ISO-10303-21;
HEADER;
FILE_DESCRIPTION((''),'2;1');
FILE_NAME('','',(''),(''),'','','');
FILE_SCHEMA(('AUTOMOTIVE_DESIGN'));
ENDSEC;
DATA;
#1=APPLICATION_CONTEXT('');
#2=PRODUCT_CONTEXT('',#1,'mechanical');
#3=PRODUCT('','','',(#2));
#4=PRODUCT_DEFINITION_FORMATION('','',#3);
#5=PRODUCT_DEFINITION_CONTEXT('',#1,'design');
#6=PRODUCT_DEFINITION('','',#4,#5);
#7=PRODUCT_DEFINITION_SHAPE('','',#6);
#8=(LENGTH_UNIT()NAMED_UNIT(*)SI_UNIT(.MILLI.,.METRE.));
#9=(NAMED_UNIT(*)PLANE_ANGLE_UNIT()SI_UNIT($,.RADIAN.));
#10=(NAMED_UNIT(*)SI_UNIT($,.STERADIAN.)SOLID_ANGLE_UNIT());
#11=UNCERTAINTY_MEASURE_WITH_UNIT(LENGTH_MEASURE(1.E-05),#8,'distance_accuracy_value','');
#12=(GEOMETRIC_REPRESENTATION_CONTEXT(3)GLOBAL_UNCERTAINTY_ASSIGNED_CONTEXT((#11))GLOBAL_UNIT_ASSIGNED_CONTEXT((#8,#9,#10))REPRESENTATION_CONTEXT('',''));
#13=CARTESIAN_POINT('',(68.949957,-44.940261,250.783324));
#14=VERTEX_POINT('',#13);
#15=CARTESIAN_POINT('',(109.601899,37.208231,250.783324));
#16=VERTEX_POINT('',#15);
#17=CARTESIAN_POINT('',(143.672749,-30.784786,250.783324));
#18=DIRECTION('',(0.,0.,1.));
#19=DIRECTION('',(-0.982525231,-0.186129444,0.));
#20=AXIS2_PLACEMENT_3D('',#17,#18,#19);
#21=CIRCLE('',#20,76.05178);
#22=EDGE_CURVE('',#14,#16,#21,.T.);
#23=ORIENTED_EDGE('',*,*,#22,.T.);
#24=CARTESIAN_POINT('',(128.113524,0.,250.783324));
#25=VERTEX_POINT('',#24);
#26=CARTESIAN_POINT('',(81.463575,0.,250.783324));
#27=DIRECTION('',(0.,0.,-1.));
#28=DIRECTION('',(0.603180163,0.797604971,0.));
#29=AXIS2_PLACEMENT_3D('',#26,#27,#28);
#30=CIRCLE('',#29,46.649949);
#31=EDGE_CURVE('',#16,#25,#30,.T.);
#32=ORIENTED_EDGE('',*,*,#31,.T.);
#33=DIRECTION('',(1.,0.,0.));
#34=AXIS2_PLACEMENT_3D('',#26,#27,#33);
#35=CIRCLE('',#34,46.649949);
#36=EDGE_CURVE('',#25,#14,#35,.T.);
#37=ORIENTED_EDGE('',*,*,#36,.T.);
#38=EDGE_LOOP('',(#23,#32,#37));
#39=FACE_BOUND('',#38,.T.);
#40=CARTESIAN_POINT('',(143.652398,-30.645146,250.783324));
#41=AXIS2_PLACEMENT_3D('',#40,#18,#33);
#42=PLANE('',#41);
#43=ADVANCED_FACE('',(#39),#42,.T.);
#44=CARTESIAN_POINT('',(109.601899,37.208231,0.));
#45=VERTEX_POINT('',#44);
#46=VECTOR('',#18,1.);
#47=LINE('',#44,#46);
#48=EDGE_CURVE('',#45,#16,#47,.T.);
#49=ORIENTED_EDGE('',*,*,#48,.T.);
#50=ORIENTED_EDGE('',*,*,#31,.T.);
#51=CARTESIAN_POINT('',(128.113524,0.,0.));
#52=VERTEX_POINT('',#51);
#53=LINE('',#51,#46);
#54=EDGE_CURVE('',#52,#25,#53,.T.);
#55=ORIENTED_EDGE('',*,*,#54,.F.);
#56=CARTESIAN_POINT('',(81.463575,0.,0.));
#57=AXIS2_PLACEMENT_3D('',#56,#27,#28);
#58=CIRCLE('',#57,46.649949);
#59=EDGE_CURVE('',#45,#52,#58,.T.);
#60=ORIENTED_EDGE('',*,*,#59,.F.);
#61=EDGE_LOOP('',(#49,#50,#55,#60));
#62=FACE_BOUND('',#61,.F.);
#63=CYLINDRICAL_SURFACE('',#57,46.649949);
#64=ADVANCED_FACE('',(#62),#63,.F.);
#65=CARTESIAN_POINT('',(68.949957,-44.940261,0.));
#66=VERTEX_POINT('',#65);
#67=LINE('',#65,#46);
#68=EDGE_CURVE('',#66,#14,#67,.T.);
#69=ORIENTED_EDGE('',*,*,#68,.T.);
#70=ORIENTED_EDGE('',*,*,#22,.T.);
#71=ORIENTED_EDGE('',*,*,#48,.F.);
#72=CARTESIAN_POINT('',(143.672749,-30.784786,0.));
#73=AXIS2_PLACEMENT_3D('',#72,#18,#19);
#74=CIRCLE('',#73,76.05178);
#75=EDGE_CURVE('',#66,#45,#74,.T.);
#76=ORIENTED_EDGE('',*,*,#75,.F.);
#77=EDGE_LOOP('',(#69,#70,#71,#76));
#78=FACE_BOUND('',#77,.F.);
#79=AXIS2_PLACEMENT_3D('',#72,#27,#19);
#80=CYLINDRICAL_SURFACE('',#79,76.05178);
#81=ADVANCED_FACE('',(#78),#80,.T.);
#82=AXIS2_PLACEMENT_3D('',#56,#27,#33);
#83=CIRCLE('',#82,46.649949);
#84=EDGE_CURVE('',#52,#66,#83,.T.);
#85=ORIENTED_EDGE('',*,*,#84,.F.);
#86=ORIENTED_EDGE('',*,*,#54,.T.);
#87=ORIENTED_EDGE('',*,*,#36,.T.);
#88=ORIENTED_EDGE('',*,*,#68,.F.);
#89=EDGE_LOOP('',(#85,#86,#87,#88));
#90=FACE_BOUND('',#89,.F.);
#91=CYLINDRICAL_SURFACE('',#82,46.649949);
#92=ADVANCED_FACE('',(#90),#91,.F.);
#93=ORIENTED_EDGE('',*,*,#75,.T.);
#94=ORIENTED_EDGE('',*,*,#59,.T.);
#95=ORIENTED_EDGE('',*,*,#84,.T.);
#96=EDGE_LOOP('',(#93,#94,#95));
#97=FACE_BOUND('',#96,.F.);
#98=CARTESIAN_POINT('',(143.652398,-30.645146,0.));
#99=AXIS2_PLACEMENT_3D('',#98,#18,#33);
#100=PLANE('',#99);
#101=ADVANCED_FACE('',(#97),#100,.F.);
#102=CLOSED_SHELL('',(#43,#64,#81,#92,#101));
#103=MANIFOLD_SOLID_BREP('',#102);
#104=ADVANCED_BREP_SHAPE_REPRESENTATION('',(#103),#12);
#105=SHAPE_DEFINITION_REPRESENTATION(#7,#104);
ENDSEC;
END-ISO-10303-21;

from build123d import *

# Parameters (mm, degrees)
F4_DEPTH = 250.7833242416


# Not quite as in the source:
# - the program builds the solid bodies; features that only make, move or delete a surface that nothing else refers to are left out


with BuildPart() as f4:
    # F3 (on Top) → F4 (new body)
    with BuildSketch(Plane.XY):
        with BuildLine():
            ThreePointArc((109.6018990825, 37.208231044), (123.2300037406, 20.7793931517), (128.1135241215, 0))
            ThreePointArc((128.1135241215, 0), (109.6811059838, -37.1481989447), (68.9499571053, -44.9402612059))
            ThreePointArc((68.9499571053, -44.9402612059), (150.7816116965, -106.503589559), (219.7245289572, -30.7847857475))
            ThreePointArc((219.7245289572, -30.7847857475), (183.6272508744, 33.9261946633), (109.6018990825, 37.208231044))
        make_face()
    extrude(amount=F4_DEPTH)


solid = f4.part
